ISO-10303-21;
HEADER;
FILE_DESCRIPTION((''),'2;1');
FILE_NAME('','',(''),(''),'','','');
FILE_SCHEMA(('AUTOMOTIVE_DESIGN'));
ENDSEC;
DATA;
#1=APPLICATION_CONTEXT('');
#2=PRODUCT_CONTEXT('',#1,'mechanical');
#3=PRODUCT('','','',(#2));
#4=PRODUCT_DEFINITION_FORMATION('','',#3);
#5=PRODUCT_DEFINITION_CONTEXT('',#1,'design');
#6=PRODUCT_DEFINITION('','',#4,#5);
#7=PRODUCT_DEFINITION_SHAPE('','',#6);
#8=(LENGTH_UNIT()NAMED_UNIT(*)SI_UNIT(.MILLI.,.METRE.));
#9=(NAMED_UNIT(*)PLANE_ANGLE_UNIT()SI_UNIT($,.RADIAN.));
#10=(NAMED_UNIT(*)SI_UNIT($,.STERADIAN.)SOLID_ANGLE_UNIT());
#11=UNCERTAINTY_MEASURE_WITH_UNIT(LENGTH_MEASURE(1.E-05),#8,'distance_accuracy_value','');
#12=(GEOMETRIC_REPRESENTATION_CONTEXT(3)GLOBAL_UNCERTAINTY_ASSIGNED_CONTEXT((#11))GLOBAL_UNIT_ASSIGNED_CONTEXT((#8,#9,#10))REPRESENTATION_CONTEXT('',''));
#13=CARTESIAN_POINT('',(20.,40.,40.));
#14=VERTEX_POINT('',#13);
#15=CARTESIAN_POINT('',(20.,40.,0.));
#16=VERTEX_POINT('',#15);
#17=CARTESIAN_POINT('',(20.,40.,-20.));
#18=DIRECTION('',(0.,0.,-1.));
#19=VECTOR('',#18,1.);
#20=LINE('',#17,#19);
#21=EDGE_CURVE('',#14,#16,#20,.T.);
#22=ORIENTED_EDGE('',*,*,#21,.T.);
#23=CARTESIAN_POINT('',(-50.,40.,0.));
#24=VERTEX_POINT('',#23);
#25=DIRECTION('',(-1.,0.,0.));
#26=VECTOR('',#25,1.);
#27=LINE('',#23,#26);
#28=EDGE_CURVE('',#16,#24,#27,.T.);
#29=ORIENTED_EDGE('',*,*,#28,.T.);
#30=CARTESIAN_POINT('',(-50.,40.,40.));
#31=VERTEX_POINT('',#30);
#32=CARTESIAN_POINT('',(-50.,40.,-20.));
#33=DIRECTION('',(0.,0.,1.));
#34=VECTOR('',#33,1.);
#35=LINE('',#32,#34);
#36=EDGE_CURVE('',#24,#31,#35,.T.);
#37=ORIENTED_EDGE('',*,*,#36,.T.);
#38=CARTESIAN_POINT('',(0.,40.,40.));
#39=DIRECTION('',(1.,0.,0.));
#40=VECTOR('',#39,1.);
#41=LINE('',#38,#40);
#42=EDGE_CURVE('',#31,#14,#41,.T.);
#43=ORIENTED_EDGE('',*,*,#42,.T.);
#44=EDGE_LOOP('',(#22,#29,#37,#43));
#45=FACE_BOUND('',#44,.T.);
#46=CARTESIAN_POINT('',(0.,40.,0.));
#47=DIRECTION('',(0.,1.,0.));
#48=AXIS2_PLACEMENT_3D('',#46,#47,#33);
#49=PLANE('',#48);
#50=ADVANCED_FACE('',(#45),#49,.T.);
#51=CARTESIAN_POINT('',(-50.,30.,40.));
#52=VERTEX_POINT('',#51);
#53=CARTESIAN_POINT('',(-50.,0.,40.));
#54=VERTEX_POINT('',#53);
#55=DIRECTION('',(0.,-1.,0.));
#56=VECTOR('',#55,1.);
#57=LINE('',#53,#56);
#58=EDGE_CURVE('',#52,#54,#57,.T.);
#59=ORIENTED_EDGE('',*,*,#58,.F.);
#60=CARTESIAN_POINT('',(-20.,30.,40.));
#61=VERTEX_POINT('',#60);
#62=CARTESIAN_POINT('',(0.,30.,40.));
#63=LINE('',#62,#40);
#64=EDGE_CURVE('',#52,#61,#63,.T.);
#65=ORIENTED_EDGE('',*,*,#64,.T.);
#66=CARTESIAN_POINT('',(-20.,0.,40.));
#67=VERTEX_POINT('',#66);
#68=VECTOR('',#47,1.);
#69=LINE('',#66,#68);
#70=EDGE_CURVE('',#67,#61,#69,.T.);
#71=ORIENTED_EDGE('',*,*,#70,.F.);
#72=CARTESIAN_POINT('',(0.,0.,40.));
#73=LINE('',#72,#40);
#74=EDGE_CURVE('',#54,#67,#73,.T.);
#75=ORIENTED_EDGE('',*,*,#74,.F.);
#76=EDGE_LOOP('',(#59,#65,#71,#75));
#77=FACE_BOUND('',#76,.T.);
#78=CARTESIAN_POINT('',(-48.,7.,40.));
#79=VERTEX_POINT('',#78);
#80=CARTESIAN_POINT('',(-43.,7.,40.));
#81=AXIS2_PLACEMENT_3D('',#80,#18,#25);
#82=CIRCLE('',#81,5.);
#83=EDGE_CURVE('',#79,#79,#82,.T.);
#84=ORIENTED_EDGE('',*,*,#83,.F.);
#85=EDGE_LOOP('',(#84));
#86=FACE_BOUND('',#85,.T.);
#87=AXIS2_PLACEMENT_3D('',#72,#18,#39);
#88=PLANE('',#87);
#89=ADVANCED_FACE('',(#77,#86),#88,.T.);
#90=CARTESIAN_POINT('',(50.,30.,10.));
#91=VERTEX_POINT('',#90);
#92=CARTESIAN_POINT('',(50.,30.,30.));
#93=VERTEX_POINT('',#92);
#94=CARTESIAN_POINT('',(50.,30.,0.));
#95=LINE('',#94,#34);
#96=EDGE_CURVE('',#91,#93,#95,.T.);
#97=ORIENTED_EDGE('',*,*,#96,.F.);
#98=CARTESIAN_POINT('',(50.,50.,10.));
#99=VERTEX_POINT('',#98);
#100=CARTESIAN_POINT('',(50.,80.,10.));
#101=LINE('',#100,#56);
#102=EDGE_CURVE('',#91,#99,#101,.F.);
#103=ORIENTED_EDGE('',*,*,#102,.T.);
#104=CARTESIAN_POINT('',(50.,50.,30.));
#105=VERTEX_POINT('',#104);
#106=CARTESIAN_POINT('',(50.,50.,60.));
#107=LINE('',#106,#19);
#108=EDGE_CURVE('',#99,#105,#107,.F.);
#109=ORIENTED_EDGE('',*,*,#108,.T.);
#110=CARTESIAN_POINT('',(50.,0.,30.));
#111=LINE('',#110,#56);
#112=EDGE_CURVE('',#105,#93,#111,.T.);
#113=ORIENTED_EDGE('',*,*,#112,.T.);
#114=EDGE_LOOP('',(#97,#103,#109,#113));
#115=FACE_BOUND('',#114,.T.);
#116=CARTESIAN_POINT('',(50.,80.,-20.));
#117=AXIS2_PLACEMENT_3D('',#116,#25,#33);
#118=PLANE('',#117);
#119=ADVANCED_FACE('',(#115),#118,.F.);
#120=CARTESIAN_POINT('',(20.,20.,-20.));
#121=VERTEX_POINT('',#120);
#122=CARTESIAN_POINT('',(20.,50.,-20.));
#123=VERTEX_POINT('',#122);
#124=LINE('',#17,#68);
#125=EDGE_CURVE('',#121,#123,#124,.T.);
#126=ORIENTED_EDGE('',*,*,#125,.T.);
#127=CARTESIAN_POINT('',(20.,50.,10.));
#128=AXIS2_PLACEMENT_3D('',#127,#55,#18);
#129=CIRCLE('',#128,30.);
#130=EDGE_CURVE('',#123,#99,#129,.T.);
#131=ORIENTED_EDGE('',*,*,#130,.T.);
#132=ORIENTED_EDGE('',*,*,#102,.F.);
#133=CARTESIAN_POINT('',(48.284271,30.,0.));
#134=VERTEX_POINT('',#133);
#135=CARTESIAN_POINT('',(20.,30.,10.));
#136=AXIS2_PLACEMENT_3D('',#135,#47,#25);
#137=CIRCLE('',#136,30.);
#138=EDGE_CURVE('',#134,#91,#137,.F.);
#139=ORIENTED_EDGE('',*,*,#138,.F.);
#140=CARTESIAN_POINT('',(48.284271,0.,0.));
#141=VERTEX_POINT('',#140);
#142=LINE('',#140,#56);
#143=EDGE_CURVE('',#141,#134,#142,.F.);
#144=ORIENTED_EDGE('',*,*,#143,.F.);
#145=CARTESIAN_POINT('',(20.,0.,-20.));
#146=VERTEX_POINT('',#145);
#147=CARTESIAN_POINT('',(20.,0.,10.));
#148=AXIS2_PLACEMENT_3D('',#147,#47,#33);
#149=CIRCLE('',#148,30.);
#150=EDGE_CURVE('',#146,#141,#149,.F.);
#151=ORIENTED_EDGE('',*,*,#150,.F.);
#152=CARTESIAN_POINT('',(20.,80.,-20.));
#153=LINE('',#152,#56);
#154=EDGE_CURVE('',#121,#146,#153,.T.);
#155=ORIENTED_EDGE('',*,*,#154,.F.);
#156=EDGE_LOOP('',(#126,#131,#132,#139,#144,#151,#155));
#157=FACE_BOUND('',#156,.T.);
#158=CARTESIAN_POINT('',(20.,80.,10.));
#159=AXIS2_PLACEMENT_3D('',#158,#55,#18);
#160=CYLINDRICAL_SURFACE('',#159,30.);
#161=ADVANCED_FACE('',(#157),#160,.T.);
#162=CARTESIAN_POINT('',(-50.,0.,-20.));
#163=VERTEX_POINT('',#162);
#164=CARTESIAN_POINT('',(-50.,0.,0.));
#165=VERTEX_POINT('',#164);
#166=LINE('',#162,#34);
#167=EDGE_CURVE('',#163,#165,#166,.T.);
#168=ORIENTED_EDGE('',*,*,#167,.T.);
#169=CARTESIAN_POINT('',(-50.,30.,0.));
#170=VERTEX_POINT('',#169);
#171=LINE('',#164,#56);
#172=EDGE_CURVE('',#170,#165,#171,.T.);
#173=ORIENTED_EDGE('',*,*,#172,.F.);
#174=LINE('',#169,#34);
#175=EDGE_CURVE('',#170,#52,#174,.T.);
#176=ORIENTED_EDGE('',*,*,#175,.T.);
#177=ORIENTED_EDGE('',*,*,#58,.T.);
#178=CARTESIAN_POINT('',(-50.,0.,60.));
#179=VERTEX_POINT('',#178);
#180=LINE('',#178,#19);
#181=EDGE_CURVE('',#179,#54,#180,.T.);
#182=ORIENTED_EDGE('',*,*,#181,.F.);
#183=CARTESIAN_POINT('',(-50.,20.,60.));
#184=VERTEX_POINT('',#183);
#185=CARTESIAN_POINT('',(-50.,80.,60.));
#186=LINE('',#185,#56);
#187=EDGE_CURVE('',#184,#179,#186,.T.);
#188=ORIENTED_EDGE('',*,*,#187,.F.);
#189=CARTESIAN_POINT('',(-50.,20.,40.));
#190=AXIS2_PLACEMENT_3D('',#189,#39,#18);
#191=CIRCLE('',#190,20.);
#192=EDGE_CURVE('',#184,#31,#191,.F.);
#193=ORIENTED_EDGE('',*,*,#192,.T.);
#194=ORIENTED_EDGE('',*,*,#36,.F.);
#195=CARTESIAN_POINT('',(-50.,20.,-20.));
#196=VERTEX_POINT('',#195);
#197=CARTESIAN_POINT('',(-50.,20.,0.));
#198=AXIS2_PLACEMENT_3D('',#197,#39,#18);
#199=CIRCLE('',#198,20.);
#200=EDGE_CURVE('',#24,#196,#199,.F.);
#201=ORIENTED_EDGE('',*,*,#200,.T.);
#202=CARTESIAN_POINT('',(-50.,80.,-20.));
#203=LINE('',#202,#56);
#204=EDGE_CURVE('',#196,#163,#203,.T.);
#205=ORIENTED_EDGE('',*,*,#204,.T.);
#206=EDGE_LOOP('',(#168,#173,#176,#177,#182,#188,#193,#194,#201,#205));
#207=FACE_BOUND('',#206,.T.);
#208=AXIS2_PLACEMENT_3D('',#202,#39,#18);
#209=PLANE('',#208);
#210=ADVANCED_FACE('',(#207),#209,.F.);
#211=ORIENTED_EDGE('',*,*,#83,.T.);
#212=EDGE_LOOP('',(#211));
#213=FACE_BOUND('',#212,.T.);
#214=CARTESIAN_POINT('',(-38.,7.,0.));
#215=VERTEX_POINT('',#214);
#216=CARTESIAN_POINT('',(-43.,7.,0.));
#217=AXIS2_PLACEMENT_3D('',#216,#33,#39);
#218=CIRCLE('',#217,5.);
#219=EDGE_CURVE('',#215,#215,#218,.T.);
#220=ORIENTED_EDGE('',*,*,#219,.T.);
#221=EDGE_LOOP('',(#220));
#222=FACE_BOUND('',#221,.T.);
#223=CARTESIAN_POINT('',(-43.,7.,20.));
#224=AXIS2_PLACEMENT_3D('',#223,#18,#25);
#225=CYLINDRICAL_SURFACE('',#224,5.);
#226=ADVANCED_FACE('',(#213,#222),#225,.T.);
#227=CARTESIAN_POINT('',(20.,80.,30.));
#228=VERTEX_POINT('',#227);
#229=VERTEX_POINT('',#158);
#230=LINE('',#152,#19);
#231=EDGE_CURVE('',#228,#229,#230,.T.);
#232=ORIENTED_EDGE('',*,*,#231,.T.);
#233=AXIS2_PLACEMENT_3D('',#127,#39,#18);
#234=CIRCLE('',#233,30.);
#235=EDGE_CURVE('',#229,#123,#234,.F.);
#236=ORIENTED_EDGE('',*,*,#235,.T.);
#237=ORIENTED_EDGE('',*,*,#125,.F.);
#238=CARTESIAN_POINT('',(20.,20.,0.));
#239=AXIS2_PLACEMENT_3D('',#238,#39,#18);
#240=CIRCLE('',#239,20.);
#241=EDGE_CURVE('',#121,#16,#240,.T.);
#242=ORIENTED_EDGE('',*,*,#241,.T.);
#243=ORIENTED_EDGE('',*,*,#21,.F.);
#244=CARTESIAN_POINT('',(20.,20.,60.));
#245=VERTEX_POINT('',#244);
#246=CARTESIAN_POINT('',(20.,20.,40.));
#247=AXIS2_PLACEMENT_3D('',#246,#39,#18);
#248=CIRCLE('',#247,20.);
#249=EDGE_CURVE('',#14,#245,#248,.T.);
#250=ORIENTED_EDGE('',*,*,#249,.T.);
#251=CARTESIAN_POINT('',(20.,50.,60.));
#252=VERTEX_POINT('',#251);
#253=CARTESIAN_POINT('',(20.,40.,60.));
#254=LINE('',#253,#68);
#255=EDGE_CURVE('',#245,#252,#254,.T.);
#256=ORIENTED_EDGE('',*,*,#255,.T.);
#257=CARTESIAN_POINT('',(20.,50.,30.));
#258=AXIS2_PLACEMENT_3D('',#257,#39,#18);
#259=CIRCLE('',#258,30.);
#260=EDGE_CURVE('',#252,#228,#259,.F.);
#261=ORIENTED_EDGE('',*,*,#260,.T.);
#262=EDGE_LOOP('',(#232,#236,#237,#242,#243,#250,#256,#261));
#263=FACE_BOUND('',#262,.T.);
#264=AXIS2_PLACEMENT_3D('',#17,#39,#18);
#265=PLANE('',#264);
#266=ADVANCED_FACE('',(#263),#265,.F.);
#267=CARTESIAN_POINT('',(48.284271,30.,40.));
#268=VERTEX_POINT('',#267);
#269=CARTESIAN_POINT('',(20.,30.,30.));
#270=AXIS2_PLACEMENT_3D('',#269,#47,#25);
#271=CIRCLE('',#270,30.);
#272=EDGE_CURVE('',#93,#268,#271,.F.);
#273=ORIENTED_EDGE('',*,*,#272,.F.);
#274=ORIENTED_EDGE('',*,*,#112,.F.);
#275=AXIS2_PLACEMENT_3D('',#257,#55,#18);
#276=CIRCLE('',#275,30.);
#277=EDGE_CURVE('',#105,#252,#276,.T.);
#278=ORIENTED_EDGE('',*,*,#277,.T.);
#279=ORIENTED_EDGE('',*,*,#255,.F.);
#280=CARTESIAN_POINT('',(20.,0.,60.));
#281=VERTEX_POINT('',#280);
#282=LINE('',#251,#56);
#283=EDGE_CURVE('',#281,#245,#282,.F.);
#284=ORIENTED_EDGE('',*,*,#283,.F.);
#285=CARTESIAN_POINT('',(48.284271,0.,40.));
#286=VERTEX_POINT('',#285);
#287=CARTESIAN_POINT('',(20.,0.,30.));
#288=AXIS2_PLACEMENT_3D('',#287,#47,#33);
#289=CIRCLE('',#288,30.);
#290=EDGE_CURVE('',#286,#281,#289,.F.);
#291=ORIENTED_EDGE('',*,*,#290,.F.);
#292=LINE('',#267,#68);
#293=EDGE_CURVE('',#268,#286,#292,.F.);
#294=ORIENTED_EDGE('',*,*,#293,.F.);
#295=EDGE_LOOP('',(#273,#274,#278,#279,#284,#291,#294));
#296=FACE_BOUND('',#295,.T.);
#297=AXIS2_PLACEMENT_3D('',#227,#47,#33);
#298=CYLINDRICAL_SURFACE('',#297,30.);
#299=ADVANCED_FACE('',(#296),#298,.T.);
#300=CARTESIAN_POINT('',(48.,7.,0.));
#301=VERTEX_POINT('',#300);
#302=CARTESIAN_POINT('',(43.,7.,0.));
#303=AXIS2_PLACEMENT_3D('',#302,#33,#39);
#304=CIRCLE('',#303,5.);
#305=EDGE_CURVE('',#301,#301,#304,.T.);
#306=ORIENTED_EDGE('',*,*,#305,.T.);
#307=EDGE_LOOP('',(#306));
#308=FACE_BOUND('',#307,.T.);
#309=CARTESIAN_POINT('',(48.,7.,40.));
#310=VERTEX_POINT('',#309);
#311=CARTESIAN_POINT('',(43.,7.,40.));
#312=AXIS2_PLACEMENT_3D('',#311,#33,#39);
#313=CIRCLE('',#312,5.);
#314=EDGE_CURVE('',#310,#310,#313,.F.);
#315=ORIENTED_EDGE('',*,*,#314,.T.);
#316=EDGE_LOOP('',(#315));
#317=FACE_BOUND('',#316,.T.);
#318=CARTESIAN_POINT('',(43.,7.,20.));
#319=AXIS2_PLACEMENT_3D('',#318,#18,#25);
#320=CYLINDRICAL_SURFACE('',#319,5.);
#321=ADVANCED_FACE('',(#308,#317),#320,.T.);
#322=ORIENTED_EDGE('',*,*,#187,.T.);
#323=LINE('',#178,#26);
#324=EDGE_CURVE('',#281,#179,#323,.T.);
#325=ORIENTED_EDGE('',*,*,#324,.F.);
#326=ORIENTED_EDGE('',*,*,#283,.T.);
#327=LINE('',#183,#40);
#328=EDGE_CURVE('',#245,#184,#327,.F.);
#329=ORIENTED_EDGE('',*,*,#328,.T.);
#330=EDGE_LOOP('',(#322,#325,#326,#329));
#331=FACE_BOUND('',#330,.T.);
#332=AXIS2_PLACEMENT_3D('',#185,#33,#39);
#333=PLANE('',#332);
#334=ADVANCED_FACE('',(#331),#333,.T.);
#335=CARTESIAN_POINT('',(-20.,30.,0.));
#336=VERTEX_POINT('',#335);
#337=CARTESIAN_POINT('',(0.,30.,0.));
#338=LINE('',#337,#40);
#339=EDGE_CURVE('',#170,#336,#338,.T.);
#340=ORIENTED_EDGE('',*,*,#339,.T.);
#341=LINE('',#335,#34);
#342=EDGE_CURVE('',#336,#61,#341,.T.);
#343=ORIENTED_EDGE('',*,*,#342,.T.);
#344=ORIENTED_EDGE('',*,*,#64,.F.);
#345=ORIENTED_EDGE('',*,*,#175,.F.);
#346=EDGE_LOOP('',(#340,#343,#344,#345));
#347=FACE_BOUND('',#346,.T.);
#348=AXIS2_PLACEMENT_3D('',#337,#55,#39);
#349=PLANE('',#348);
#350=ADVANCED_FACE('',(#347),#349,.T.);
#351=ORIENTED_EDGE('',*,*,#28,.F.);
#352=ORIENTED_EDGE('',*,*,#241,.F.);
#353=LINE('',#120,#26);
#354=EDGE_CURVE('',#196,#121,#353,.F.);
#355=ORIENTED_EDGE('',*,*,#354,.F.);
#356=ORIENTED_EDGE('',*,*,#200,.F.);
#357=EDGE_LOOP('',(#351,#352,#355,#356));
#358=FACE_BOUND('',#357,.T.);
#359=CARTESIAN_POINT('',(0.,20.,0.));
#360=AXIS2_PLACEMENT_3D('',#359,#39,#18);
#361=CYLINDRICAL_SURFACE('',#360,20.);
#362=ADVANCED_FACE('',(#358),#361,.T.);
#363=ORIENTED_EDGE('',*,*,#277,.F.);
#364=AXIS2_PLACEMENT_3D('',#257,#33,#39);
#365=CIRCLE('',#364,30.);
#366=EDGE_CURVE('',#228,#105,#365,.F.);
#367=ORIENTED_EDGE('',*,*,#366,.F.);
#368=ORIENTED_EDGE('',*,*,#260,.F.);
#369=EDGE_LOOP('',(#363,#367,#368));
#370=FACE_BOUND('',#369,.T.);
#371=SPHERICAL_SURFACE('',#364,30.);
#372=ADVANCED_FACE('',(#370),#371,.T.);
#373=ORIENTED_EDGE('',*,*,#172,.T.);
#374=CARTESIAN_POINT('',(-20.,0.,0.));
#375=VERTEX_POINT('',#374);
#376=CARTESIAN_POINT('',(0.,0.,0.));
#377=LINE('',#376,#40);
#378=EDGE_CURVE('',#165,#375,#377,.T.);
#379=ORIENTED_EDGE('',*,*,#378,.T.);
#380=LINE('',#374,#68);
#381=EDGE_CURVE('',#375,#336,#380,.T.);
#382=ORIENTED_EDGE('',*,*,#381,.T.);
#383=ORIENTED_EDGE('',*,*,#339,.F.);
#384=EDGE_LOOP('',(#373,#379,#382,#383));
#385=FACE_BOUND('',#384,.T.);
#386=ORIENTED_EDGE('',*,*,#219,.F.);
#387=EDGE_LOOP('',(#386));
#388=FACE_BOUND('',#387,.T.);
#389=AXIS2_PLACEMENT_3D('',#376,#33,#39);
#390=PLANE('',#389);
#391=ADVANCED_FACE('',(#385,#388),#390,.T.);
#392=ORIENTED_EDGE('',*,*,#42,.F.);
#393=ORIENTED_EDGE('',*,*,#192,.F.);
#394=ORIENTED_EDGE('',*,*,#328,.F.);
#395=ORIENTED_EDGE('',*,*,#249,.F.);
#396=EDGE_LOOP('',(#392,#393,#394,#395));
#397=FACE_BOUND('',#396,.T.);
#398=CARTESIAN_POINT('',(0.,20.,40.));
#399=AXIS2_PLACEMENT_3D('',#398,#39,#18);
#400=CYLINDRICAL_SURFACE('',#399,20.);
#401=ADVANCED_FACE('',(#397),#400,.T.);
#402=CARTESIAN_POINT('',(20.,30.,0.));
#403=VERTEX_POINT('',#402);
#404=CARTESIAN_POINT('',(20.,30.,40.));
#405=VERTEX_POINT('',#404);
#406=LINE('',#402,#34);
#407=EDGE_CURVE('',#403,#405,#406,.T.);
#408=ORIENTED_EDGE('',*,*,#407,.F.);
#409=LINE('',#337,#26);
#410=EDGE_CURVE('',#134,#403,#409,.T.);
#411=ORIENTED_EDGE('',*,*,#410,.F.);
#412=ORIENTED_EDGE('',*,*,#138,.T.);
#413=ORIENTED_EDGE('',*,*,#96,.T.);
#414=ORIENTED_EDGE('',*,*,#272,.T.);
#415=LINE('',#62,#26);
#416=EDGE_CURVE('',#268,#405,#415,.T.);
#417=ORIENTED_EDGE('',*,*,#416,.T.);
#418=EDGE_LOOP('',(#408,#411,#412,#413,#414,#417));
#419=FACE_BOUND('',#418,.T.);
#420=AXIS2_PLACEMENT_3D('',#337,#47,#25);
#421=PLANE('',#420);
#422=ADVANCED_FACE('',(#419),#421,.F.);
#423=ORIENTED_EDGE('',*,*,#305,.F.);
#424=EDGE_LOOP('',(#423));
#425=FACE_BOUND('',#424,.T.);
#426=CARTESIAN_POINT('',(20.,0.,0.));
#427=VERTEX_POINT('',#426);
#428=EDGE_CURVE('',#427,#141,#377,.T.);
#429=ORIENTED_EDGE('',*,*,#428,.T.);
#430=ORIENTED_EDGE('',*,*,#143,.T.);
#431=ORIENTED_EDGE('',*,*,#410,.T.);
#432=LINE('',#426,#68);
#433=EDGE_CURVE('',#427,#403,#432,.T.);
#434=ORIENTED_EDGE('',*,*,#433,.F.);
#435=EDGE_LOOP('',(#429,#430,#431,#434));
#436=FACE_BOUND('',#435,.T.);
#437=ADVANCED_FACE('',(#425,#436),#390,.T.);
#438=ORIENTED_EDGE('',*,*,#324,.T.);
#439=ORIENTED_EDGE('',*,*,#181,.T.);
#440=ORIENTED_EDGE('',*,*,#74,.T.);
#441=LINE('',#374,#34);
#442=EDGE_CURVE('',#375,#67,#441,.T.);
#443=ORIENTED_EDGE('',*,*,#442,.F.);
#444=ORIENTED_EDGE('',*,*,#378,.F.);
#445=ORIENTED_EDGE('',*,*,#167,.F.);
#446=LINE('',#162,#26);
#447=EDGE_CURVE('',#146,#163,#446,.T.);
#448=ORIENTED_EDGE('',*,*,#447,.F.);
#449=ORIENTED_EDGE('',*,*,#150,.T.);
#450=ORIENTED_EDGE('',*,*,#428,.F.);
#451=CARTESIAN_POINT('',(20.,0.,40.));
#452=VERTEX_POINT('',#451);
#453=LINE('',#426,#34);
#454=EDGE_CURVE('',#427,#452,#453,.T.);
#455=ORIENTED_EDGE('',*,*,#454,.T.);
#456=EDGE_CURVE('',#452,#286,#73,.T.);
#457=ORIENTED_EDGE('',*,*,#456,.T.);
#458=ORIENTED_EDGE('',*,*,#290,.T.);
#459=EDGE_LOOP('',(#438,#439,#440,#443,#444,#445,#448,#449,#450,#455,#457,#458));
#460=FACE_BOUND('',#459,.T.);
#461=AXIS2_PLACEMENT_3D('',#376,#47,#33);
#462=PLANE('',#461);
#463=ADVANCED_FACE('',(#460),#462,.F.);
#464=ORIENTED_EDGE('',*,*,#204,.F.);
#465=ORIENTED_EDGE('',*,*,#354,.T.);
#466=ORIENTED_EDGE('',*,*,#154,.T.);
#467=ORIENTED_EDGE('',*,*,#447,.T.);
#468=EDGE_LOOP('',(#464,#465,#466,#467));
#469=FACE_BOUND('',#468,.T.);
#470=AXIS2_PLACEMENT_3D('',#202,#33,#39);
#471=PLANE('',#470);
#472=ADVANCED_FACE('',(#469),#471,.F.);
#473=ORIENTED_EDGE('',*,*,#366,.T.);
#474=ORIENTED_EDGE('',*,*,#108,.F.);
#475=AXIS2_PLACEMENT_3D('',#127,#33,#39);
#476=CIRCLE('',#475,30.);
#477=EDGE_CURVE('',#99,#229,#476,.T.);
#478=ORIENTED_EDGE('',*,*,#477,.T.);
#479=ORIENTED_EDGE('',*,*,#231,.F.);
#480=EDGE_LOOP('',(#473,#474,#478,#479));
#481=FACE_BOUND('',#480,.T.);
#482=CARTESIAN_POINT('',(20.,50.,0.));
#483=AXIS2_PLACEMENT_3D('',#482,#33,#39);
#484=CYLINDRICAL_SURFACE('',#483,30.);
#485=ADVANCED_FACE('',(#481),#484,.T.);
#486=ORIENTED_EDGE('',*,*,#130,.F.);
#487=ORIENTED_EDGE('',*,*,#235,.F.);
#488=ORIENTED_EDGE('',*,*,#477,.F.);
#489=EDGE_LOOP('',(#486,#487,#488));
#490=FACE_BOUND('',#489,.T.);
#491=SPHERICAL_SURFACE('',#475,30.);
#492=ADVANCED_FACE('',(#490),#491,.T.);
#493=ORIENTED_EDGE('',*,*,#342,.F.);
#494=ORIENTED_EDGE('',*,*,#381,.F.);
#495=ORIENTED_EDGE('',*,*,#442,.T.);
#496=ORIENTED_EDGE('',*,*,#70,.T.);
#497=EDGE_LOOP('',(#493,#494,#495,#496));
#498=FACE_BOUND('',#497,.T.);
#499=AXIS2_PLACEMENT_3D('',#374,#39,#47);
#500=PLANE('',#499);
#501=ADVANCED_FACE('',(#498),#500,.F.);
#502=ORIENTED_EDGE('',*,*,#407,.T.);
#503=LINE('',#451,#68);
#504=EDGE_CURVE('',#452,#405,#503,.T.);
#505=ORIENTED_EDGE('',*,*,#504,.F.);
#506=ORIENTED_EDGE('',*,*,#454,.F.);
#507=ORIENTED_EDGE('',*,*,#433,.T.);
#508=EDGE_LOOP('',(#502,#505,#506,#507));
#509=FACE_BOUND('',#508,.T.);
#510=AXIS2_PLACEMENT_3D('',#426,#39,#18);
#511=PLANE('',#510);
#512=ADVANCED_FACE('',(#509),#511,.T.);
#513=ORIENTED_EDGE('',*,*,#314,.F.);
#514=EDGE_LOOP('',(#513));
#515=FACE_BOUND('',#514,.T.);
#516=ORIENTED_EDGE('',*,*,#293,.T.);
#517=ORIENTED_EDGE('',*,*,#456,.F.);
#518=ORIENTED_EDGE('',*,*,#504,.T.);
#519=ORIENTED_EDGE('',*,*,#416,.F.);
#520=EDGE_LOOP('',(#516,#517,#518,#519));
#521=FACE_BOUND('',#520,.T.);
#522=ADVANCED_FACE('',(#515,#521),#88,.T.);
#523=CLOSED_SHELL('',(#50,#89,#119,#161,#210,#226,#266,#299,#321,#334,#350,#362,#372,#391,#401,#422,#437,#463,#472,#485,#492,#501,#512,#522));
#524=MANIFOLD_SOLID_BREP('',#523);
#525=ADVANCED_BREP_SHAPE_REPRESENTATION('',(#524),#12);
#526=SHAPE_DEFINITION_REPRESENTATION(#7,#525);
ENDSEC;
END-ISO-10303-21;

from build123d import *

# Parameters (mm, degrees)
SKETCH_1_W          = 100
SKETCH_1_H          = 40
EXTRUDE_1_DEPTH     = 80
SKETCH_3_W          = 30
SKETCH_3_H          = 30
CUT_EXTRUDE_2_DEPTH = 20
SKETCH_6_R          = 5
EXTRUDE_2_DEPTH     = 20
SKETCH_7_W          = 70
SKETCH_7_H          = 80
CUT_EXTRUDE_3_DEPTH = 40
FILLET_1_R          = 30
FILLET_2_R          = 30
FILLET_3_R          = 30
FILLET_4_R          = 20
FILLET_5_R          = 20


with BuildPart() as part:
    # 草圖1 → 填料-伸長1 (new body)
    with BuildSketch(Plane(origin=(0, 0, 0), x_dir=(1, 0, 0), z_dir=(0, 1, 0))):
        Rectangle(SKETCH_1_W, SKETCH_1_H)
    extrude_1 = extrude(amount=EXTRUDE_1_DEPTH)

    # 草圖3 → 除料-伸長2 (cut)
    with BuildSketch(Plane.XY.offset(20)):
        with Locations((-35, 15)):
            Rectangle(SKETCH_3_W, SKETCH_3_H)
        with Locations((35, 15)):
            Rectangle(SKETCH_3_W, SKETCH_3_H)
    cut_extrude_2 = extrude(amount=-CUT_EXTRUDE_2_DEPTH, mode=Mode.SUBTRACT)

    # 草圖6 → 填料-伸長2 (add)
    with BuildSketch(Plane.XY):
        with Locations((-43, 7)):
            Circle(SKETCH_6_R)
        with Locations((43, 7)):
            Circle(SKETCH_6_R)
    extrude_2 = extrude(amount=EXTRUDE_2_DEPTH)

    # 鏡射3: 填料-伸長1, 除料-伸長2, 填料-伸長2 across plane
    add(extrude_1.mirror(Plane(origin=(-50, 80, 20), x_dir=(1, 0, 0), z_dir=(0, 0, -1))))
    add(cut_extrude_2.mirror(Plane(origin=(-50, 80, 20), x_dir=(1, 0, 0), z_dir=(0, 0, -1))), mode=Mode.SUBTRACT)
    add(extrude_2.mirror(Plane(origin=(-50, 80, 20), x_dir=(1, 0, 0), z_dir=(0, 0, -1))))

    # 草圖7 → 除料-伸長3 (cut)
    with BuildSketch(Plane(origin=(0, 80, 0), x_dir=(1, 0, 0), z_dir=(0, 1, 0))):
        with Locations((-15, -20)):
            Rectangle(SKETCH_7_W, SKETCH_7_H)
    extrude(amount=-CUT_EXTRUDE_3_DEPTH, mode=Mode.SUBTRACT)

    # 圓角1
    fillet_1_edges = [part.edges().sort_by_distance(p)[0] for p in [
        (50, 80, 20),
    ]]
    fillet(fillet_1_edges, radius=FILLET_1_R - 0.0001)  # a hair under: the kernel refuses the full size

    # 圓角2
    fillet_2_edges = [part.edges().sort_by_distance(p)[0] for p in [
        (50, 25.00005, 60),
        (41.213232725, 71.213232725, 60),
    ]]
    fillet(fillet_2_edges, radius=FILLET_2_R - 0.0001)  # a hair under: the kernel refuses the full size

    # 圓角3
    fillet_3_edges = [part.edges().sort_by_distance(p)[0] for p in [
        (50, 25.00005, -20),
        (41.213232725, 71.213232725, -20),
    ]]
    fillet(fillet_3_edges, radius=FILLET_3_R - 0.0001)  # a hair under: the kernel refuses the full size

    # 圓角4
    fillet_4_edges = [part.edges().sort_by_distance(p)[0] for p in [
        (-15, 40, 60),
    ]]
    fillet(fillet_4_edges, radius=FILLET_4_R)

    # 圓角5
    fillet_5_edges = [part.edges().sort_by_distance(p)[0] for p in [
        (-15, 40, -20),
    ]]
    fillet(fillet_5_edges, radius=FILLET_5_R)


solid = part.part
